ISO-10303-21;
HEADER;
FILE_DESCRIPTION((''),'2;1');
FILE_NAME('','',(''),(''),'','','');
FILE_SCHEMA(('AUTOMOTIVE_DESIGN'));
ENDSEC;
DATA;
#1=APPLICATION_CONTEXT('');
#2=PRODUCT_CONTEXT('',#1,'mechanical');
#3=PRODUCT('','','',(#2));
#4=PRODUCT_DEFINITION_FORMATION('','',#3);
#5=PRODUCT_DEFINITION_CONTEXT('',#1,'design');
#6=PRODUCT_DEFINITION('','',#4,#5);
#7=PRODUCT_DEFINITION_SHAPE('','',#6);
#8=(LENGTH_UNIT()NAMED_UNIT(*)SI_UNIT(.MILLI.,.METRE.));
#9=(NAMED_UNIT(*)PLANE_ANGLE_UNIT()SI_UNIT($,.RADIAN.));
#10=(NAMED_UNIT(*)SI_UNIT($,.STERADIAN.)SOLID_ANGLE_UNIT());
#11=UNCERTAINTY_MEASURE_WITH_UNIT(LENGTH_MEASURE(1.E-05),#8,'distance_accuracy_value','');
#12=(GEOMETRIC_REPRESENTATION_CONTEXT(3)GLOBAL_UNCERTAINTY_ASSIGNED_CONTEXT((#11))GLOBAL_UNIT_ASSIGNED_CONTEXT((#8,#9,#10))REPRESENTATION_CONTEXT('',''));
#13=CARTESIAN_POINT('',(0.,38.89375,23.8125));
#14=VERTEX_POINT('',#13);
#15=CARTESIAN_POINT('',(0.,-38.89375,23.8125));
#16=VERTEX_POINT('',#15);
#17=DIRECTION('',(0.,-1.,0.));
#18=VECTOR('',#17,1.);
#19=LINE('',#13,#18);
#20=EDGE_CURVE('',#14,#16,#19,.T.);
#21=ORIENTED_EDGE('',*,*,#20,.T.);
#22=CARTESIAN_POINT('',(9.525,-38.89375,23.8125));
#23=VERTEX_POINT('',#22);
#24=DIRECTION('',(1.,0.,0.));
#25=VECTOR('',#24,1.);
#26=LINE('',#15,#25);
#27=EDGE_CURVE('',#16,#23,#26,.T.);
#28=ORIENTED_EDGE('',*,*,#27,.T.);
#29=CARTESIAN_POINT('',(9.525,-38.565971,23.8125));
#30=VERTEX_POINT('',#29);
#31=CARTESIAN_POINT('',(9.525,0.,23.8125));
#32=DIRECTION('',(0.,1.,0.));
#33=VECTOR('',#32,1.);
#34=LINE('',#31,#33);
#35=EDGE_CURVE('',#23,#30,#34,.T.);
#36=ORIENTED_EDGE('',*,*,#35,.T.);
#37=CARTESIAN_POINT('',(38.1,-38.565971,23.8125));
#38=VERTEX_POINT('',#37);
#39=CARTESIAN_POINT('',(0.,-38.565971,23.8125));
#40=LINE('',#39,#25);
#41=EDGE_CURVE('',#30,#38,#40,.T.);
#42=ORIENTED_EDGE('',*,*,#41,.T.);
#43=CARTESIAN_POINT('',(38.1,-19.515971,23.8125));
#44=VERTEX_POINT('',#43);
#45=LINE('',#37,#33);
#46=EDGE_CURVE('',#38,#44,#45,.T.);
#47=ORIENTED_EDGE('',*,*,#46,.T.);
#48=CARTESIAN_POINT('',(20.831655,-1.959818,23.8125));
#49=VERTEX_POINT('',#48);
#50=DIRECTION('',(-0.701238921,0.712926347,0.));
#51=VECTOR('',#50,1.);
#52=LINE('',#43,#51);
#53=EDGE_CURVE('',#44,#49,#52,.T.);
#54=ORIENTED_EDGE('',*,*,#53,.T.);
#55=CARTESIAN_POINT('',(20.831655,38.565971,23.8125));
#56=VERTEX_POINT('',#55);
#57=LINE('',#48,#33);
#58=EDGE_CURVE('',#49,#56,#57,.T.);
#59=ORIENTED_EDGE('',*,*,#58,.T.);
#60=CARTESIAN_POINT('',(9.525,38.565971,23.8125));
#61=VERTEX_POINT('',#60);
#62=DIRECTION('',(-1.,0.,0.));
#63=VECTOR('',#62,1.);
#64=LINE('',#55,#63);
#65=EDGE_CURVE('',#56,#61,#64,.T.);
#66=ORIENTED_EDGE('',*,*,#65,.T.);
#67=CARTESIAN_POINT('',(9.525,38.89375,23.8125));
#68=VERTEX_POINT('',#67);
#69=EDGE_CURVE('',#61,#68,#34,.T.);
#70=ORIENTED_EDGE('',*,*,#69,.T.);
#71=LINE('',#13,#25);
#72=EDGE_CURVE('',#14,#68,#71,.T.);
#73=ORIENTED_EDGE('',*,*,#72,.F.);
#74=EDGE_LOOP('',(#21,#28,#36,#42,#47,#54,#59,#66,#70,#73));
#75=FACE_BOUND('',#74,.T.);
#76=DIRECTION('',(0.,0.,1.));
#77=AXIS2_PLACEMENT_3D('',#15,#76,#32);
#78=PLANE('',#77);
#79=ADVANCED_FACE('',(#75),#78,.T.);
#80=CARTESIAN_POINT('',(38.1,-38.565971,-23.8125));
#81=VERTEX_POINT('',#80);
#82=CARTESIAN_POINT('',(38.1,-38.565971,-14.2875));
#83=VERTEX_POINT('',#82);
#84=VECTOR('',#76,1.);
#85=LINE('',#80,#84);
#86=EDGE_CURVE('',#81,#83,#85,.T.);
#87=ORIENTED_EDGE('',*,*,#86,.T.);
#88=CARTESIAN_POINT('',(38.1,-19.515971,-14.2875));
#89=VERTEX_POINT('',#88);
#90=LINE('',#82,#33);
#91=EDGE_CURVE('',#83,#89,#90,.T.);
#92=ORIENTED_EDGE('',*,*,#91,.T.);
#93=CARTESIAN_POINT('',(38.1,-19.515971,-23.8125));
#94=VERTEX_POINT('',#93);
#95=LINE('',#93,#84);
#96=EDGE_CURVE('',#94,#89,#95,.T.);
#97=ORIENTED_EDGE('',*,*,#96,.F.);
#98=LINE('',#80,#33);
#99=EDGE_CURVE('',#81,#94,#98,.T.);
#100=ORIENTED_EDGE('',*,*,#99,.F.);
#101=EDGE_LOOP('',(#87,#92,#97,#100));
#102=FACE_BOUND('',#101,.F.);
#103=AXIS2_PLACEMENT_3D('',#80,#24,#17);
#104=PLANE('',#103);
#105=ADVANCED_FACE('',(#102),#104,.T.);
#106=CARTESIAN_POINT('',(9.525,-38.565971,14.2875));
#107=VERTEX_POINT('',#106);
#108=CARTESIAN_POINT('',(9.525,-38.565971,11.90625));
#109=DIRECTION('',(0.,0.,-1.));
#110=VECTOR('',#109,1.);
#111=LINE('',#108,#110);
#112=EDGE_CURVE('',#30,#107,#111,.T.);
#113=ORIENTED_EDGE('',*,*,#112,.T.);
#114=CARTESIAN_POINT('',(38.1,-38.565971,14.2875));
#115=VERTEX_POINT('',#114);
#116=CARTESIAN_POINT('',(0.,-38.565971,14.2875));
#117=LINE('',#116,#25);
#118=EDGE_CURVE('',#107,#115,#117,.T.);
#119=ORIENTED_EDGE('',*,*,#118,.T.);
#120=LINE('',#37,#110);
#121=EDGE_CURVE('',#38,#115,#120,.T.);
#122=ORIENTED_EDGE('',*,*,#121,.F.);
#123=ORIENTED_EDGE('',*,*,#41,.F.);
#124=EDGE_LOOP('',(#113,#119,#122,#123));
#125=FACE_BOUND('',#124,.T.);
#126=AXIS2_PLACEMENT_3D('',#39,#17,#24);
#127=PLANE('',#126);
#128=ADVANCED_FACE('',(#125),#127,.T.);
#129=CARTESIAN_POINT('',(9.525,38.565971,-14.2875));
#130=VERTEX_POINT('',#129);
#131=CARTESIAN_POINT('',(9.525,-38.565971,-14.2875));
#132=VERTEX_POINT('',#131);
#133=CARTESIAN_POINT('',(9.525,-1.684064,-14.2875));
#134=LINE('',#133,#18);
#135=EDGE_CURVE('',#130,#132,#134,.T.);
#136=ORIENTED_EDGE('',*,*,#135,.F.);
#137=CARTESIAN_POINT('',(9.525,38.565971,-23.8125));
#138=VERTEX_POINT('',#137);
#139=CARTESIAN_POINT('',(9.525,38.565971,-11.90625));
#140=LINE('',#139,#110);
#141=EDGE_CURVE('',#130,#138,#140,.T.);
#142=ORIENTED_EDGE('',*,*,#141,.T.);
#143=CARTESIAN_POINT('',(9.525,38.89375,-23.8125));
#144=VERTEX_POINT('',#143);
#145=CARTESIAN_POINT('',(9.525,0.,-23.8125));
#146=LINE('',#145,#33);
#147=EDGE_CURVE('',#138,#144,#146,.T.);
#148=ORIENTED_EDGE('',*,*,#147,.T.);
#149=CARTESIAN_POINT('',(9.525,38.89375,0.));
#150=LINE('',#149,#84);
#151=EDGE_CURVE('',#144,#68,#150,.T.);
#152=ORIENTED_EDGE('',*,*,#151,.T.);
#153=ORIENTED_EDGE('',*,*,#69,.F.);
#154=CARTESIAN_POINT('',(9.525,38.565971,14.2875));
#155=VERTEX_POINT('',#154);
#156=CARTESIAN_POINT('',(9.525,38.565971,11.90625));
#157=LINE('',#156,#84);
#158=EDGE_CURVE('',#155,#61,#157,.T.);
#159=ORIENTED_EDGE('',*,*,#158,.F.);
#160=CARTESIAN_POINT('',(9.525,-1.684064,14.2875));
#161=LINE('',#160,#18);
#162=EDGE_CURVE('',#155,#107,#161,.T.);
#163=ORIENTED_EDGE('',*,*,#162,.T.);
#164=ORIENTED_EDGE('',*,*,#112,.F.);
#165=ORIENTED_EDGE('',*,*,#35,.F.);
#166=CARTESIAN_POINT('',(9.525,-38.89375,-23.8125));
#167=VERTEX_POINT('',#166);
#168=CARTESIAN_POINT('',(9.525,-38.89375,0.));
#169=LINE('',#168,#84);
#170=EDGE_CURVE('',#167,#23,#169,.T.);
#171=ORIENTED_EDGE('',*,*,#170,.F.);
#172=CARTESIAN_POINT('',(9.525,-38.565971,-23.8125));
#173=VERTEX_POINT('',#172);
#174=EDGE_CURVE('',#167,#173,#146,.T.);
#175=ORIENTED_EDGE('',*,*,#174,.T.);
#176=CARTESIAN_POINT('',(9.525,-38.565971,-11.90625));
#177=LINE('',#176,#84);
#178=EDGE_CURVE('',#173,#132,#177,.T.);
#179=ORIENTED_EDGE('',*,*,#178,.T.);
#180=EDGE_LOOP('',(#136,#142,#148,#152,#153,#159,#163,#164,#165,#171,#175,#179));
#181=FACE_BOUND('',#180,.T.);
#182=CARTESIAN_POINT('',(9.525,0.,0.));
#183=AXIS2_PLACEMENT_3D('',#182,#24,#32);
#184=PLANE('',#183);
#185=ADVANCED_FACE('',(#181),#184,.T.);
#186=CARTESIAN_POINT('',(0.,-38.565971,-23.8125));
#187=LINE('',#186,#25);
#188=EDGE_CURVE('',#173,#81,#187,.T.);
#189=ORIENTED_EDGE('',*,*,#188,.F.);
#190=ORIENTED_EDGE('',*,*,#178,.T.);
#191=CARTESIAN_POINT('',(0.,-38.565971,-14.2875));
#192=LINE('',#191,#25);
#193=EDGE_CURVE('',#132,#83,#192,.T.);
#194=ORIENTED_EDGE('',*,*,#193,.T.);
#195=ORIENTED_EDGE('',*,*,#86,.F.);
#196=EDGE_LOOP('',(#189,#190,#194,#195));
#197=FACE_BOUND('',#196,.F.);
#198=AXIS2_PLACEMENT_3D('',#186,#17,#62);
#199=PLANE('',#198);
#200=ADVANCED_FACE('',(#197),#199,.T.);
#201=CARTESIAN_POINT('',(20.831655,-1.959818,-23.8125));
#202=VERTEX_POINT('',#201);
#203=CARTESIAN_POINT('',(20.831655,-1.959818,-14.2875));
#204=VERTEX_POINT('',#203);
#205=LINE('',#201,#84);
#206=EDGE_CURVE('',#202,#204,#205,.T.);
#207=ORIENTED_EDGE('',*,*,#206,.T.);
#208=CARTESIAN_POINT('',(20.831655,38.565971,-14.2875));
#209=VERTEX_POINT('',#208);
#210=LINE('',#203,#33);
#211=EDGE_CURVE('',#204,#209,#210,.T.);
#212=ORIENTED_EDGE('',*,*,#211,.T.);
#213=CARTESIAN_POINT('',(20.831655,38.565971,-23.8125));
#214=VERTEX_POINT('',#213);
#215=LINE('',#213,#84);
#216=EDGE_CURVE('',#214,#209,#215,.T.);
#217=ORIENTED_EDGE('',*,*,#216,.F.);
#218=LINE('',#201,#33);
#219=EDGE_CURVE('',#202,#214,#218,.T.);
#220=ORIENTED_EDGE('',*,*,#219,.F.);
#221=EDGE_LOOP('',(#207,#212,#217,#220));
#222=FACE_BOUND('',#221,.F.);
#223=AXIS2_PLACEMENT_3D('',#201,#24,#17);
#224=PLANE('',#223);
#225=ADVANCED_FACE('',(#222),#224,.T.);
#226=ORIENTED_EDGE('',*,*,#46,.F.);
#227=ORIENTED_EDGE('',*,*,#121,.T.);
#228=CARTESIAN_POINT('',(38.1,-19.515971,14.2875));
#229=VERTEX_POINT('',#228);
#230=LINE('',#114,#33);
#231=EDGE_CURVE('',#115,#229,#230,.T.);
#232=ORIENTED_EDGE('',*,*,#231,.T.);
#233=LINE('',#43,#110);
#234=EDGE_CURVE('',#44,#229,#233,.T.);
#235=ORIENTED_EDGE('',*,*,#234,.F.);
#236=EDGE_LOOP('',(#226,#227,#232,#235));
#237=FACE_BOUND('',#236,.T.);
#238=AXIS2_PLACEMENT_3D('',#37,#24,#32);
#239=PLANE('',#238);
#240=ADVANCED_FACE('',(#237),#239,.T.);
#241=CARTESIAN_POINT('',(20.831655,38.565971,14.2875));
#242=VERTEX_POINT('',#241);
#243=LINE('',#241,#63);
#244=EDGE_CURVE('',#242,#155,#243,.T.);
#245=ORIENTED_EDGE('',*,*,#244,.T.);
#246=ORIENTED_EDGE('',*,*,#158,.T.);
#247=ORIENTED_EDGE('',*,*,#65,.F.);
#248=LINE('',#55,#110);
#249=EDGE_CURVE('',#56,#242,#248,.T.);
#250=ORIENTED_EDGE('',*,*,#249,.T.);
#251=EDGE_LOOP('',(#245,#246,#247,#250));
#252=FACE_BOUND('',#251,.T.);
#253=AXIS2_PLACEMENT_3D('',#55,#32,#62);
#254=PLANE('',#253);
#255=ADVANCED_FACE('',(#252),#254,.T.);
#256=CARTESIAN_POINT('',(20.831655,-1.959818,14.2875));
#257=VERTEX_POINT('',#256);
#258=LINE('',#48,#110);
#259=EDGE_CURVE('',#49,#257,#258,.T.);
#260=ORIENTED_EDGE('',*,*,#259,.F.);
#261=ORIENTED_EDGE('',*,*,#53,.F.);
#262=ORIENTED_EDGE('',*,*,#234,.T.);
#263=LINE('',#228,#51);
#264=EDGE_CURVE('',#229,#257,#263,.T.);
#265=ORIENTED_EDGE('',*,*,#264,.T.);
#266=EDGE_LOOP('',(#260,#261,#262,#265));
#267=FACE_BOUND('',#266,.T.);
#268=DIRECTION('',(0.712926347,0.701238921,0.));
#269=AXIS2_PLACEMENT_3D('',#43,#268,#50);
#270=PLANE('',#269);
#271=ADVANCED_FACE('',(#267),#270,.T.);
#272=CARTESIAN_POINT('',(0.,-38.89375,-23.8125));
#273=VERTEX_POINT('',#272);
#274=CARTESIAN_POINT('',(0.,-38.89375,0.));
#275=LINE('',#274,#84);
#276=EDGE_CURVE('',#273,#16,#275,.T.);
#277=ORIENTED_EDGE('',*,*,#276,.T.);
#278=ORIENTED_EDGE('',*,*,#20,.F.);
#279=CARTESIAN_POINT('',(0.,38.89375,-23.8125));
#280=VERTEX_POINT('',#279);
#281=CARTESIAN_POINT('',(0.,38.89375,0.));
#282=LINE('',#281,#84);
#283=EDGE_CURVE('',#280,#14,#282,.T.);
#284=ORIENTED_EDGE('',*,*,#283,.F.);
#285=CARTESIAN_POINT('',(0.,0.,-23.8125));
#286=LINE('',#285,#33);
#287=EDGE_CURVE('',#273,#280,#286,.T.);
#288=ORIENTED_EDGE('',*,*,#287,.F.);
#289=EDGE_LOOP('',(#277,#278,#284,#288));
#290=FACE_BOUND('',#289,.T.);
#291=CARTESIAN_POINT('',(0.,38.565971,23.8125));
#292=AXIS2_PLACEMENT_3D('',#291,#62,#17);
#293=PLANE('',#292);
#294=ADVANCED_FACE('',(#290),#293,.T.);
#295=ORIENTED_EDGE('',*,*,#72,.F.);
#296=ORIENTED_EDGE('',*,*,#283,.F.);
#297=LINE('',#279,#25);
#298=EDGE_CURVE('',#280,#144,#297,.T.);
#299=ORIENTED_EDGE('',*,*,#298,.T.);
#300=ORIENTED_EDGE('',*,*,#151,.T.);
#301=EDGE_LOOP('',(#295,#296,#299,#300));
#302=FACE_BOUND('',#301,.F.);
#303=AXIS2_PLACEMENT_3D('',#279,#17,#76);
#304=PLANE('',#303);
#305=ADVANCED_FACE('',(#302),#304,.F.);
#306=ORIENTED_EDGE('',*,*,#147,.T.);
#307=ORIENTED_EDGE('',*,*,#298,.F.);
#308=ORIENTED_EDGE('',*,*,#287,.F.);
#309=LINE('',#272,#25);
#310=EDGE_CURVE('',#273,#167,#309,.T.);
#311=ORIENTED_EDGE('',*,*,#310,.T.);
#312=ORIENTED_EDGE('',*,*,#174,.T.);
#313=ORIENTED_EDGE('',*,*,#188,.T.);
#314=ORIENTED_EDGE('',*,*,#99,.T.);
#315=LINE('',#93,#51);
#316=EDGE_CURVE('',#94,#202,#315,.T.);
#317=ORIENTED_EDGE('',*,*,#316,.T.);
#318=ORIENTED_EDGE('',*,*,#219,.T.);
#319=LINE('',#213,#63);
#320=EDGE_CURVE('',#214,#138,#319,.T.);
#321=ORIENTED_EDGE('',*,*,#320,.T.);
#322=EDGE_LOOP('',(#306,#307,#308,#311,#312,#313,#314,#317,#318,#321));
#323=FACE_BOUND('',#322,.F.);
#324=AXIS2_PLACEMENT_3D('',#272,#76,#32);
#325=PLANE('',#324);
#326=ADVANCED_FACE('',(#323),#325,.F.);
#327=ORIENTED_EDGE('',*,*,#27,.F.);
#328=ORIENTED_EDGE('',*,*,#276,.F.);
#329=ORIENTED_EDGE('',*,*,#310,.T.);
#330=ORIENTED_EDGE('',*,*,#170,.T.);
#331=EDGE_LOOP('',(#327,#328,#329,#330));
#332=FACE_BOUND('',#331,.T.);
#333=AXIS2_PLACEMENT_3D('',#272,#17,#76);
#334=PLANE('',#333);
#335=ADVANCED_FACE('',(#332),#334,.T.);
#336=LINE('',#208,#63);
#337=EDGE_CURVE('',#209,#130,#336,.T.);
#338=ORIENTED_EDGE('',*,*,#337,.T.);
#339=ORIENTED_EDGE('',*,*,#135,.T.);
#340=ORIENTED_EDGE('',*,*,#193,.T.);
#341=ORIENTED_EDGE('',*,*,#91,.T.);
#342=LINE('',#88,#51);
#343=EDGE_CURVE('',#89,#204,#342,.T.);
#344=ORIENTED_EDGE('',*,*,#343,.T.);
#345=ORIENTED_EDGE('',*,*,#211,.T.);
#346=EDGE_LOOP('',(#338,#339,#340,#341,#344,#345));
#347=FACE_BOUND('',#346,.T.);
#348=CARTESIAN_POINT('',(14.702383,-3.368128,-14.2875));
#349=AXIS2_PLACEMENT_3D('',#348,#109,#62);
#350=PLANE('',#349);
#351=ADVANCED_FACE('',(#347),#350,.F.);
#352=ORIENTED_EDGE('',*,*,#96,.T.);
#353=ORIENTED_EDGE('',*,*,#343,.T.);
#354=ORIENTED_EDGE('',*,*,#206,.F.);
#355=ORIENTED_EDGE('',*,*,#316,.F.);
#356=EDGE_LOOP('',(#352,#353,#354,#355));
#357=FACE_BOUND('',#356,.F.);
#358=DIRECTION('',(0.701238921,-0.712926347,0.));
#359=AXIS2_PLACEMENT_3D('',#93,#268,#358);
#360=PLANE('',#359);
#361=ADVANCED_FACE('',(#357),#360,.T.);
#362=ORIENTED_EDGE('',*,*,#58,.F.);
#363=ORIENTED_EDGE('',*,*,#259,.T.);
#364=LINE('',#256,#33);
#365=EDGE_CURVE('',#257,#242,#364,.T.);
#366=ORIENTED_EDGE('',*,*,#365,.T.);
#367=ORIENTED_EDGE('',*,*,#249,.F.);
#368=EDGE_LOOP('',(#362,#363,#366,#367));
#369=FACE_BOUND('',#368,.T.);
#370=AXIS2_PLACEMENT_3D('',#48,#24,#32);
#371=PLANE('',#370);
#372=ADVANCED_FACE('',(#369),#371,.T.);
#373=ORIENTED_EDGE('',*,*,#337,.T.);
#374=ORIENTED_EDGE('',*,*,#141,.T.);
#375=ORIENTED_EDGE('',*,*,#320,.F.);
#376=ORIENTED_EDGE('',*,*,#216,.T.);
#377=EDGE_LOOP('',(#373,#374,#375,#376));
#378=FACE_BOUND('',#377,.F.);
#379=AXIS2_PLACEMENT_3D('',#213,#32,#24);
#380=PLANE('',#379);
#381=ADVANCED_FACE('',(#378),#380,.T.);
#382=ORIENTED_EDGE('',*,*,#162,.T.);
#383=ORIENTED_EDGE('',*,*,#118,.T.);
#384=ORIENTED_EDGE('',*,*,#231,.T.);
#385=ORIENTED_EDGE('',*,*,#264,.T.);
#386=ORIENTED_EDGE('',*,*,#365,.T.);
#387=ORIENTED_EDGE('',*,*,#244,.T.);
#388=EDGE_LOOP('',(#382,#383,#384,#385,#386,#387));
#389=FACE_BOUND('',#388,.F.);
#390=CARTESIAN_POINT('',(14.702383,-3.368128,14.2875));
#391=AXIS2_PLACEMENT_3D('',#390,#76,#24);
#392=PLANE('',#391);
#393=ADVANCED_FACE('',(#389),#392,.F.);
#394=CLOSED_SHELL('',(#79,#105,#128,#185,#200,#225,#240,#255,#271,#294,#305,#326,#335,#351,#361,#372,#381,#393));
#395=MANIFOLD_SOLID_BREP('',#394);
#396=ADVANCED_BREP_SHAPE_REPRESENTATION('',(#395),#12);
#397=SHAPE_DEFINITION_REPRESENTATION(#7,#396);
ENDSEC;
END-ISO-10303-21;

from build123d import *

# Parameters (mm, degrees)
F0_W     = 77.7875
F0_H     = 47.625
F1_DEPTH = 9.525
F2_R     = 12.6438150781
F3_DEPTH = 97
F5_DEPTH = 9.525


# Not quite as in the source:
# - an extrude ends at something that could not be found from the text; its depth is read off the source's solid


with BuildPart() as f1:
    # F0 (on Right) → F1 (new body)
    with BuildSketch(Plane.YZ):
        Rectangle(F0_W, F0_H)
    extrude(amount=F1_DEPTH)

    # F2 (on Right) → F3 (cut, through all)
    with BuildSketch(Plane.YZ):
        Circle(F2_R)
    extrude(amount=-F3_DEPTH, mode=Mode.SUBTRACT)

    # F4 (on face) → F5 (join)
    with BuildSketch(Plane.XY.offset(23.8125)):
        Polygon((0, 38.5659709573), (0, -38.5659709573), (38.1, -38.5659709573), (38.1, -19.5159709573), (20.8316552401, -1.9598177195), (20.8316552401, 38.5659709573), align=None)
    extrude(amount=-F5_DEPTH)

    # F6: F1 across plane


with BuildPart() as f1_1:
    add(f1.part)
    add(f1.part.mirror(Plane.XY))


solid = f1_1.part
